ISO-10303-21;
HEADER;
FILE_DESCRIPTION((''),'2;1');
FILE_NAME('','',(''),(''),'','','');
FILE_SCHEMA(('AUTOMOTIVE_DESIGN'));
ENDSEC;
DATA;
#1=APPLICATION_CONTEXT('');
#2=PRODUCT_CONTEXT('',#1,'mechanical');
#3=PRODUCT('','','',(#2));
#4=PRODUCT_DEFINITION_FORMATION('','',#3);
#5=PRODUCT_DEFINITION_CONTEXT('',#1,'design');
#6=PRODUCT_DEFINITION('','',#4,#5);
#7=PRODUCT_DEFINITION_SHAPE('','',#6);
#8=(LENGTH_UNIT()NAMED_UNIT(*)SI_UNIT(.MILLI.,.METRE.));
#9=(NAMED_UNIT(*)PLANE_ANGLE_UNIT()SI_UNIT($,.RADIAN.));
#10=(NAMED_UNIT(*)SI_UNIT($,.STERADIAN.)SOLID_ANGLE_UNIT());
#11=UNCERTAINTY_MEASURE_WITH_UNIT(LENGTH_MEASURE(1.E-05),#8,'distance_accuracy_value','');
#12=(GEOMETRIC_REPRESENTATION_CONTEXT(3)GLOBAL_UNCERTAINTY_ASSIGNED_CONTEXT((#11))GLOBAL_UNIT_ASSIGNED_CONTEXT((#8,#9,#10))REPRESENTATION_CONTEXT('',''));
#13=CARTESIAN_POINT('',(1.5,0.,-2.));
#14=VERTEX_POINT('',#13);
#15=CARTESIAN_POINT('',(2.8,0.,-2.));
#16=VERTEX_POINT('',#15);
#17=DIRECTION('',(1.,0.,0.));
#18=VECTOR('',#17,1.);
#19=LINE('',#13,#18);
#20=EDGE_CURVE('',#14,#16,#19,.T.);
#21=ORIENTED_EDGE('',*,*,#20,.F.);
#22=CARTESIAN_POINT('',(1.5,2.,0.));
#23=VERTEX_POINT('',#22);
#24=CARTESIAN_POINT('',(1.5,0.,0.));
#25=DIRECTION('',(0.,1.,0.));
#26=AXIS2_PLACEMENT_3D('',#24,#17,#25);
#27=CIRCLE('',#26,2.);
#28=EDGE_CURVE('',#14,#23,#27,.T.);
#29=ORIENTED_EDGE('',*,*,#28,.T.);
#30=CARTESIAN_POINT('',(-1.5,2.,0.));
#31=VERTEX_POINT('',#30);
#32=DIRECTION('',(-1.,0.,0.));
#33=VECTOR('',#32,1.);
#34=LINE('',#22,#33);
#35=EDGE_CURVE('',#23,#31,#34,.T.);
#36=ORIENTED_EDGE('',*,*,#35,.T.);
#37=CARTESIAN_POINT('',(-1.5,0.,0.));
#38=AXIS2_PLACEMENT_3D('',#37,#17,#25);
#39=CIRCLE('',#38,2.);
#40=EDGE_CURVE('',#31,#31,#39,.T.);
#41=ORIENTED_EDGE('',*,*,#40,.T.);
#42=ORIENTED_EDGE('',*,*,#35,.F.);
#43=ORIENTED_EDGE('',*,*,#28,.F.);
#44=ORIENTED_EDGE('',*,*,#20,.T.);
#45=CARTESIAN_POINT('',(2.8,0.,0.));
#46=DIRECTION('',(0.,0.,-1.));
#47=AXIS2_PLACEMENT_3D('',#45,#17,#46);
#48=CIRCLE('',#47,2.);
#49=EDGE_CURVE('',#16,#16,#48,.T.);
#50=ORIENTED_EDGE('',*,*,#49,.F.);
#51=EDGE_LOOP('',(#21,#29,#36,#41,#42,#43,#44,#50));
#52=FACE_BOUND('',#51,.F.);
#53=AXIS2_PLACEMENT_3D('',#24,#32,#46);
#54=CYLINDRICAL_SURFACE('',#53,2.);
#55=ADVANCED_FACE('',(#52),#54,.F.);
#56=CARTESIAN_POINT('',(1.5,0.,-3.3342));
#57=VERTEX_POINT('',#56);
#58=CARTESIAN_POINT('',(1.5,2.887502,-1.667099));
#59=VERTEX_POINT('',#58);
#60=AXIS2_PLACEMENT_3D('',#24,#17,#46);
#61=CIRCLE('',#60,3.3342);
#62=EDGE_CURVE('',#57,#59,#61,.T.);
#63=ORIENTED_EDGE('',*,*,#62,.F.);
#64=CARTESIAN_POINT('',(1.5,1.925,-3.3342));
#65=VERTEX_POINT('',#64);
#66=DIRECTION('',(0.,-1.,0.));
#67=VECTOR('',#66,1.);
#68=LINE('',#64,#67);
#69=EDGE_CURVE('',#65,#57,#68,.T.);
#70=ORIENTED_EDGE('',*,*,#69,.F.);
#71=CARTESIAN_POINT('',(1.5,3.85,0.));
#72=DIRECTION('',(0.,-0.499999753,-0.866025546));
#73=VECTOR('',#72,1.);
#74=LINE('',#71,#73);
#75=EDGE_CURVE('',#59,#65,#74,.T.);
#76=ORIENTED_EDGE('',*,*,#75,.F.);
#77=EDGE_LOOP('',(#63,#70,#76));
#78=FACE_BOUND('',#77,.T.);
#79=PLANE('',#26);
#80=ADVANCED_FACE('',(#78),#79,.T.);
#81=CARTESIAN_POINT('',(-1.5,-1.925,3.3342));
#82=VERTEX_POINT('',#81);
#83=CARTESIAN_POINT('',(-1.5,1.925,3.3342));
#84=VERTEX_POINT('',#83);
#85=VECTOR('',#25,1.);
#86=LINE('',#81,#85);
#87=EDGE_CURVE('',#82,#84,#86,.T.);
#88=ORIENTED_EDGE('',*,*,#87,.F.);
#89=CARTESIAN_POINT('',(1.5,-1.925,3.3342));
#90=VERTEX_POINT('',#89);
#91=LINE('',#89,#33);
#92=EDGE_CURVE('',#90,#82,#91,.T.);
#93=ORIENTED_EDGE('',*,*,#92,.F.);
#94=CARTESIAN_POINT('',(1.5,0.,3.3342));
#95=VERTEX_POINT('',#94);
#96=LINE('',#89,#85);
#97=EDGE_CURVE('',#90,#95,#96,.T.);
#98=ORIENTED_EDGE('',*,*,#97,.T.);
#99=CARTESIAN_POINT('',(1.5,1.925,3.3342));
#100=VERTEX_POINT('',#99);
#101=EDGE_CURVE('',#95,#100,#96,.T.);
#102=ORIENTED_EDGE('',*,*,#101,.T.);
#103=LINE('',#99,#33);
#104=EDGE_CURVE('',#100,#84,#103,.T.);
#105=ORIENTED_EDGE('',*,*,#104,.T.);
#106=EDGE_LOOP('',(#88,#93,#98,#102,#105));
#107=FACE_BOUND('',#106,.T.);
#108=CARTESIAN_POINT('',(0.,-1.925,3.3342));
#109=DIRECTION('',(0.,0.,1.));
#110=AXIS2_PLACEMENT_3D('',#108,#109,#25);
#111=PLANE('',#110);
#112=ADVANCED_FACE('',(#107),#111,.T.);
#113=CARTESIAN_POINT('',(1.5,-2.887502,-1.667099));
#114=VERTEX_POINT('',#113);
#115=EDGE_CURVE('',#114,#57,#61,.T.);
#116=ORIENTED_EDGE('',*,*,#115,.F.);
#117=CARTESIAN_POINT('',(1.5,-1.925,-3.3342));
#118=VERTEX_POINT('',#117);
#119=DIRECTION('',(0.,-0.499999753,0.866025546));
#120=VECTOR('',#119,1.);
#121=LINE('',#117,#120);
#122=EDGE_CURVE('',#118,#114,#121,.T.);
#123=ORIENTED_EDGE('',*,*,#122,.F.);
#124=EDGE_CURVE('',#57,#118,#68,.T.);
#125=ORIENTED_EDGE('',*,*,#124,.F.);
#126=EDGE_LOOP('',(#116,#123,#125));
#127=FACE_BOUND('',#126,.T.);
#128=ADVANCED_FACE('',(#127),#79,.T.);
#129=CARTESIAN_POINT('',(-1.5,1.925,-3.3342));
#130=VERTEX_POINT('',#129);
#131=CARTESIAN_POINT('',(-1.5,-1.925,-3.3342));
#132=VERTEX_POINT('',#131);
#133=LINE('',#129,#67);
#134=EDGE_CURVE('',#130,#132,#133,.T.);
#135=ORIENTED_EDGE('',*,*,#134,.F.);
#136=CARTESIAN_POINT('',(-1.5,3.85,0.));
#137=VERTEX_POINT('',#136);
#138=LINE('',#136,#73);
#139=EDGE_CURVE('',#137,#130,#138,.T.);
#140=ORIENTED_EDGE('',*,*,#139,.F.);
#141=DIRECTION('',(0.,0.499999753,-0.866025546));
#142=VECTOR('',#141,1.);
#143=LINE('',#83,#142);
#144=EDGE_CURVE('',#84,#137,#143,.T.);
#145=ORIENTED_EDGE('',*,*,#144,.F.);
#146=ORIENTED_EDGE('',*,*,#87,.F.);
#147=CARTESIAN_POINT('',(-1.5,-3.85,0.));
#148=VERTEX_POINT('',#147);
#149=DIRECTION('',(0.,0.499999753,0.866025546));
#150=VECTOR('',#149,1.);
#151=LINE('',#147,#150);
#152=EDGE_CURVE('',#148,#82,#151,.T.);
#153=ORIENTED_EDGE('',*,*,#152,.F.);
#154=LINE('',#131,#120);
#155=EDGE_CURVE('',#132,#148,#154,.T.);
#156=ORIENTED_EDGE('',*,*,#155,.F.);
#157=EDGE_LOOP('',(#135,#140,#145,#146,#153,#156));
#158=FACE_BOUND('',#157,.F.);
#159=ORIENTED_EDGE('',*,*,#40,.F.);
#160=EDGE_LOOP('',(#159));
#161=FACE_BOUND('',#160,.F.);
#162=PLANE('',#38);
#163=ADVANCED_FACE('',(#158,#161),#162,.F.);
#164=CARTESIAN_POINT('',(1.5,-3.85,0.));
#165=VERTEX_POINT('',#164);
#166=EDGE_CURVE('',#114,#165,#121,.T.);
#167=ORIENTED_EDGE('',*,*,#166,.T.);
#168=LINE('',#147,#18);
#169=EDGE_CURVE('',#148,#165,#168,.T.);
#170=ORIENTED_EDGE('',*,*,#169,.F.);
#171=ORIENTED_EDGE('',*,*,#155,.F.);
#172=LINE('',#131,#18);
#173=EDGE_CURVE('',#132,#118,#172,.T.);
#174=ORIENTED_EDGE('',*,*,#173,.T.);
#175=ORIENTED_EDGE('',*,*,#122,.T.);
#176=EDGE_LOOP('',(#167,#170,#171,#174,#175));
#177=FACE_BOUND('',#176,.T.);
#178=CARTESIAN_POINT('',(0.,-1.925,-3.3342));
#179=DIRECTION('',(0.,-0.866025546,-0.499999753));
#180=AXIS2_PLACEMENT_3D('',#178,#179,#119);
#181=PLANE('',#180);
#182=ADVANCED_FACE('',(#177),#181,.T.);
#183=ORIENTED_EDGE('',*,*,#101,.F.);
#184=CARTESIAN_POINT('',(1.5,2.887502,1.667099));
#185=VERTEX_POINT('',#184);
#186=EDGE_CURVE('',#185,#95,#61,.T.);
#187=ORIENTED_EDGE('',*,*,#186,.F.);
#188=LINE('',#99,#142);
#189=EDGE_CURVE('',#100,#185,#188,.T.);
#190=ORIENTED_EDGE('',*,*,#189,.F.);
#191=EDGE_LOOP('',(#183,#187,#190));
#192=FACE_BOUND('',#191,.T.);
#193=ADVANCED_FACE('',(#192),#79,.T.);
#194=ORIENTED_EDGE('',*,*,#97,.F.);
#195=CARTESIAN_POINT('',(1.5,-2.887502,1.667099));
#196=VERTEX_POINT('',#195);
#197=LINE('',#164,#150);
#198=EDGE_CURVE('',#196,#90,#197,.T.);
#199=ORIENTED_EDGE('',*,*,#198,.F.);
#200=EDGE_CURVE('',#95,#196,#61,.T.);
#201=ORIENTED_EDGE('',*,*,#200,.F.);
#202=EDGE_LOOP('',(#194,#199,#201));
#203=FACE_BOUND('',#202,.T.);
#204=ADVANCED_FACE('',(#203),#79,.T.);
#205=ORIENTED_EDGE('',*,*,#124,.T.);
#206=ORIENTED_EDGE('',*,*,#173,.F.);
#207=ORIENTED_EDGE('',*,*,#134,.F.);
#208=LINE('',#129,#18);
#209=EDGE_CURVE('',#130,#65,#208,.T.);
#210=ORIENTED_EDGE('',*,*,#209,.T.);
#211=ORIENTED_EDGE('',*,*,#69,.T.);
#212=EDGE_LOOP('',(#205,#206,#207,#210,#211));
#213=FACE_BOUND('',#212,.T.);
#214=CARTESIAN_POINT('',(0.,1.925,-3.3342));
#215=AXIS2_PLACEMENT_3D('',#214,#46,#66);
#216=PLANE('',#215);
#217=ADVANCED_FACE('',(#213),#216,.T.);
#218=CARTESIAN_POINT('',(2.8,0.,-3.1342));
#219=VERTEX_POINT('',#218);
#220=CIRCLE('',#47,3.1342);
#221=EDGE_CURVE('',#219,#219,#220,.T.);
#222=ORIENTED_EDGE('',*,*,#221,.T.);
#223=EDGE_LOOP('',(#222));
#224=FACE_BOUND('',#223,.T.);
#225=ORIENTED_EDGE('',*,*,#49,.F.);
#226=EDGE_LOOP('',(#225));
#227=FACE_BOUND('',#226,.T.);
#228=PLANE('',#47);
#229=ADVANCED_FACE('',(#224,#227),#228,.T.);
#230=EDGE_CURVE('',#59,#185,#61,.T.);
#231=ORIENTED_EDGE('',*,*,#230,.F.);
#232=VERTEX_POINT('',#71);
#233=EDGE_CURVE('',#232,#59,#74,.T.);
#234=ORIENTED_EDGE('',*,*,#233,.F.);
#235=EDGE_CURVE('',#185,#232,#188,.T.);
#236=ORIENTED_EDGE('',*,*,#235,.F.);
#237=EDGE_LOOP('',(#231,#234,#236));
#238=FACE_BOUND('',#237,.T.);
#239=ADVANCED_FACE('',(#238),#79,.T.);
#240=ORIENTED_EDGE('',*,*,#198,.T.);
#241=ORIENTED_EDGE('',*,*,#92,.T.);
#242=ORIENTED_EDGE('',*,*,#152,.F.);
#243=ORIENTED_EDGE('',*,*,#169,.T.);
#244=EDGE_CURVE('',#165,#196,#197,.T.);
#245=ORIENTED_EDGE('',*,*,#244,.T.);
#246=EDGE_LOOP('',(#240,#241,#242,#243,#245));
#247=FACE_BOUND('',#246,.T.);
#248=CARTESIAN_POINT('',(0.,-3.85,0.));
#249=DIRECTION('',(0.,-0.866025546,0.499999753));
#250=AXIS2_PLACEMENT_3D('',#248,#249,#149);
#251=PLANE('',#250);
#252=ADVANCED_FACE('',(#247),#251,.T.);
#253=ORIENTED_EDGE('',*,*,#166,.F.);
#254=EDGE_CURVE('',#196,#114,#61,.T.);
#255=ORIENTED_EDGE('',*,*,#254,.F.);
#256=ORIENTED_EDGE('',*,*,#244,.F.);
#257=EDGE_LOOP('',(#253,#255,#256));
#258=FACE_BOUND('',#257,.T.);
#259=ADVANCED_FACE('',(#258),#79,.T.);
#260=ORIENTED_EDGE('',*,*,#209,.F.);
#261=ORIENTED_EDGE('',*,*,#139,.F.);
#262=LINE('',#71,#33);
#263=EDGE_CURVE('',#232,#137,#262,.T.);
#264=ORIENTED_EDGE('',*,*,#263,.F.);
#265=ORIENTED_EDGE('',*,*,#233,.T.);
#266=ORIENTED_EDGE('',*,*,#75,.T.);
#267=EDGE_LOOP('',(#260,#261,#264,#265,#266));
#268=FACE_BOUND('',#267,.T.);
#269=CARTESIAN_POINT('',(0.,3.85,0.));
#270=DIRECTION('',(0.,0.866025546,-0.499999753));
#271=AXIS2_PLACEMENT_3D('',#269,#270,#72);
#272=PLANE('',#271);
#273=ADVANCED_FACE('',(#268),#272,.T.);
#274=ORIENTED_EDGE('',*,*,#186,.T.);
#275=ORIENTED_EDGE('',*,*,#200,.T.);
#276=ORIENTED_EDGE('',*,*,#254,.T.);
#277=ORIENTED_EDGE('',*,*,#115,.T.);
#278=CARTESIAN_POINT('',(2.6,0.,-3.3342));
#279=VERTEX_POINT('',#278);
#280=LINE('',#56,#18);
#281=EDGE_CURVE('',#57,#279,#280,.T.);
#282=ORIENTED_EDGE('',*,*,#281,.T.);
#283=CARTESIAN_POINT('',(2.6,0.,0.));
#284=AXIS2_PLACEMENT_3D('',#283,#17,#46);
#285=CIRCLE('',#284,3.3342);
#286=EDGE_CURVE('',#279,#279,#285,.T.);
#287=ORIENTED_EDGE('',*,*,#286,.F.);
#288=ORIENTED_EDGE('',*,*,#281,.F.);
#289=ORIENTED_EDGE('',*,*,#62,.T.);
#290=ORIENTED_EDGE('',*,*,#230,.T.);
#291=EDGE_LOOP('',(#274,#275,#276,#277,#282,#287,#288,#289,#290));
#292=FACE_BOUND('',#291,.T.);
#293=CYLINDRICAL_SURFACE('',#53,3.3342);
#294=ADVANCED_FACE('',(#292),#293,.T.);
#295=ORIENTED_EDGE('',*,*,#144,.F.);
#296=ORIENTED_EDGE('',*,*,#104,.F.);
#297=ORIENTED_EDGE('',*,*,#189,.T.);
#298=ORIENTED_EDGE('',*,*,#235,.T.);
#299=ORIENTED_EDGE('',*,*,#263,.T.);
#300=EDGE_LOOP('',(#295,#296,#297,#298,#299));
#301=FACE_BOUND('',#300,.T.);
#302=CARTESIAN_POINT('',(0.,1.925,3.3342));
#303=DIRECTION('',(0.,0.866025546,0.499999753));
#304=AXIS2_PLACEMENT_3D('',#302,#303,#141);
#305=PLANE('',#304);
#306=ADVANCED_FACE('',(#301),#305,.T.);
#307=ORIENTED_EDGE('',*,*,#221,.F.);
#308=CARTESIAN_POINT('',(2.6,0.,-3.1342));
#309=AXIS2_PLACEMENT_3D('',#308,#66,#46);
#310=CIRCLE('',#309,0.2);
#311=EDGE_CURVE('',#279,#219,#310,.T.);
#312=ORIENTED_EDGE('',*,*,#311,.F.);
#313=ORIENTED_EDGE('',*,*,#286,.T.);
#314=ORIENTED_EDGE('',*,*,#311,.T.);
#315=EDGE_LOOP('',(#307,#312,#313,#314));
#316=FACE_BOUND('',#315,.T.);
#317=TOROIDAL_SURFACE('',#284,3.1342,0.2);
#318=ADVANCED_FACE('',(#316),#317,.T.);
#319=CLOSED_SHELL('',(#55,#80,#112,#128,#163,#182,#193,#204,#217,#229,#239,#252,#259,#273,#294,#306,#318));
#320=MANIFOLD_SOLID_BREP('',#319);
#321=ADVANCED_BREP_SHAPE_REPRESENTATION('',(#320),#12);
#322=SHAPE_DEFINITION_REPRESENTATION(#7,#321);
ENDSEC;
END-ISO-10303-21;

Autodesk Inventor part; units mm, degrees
ref_plane "YZ Plane" through (0, 0, 0) normal (1, 0, 0) x (0, 1, 0)
ref_plane "XZ Plane" through (0, 0, 0) normal (0, 1, 0) x (-1, 0, 0)
ref_plane "XY Plane" through (0, 0, 0) normal (0, 0, 1) x (1, 0, 0)
sketch "Sketch1" plane through (0, 0, 0) normal (1, 0, 0) x (0, 1, 0)
  circle A0 centre (0, 0) radius 3.85 construction
  line L0 (-3.85, 0) -> (-1.925, 3.3342)
  line L1 (-1.925, 3.3342) -> (1.925, 3.3342)
  line L2 (1.925, 3.3342) -> (3.85, 0)
  line L3 (3.85, 0) -> (1.925, -3.3342)
  line L4 (1.925, -3.3342) -> (-1.925, -3.3342)
  line L5 (-1.925, -3.3342) -> (-3.85, 0)
  circle A1 centre (0, 0) radius 2
  dimension "d0" = 7.7
  dimension "d1" = 4
extrude "Extrusion1" add sketch "Sketch1" along normal mid plane 3
sketch "Sketch2" plane through (1.5, 0, 0) normal (1, 0, 0) x (0, 0, -1)
  circle A0 centre (0, 0) radius 3.3342
  circle A1 centre (0, 0) radius 2
extrude "Extrusion2" add sketch "Sketch2" along normal blind 1.3
fillet "Fillet1" radius 0.2 1 edges at (2.8, 0, 3.3342)
thread "Thread1" size "M4x0.7" class "6H" standard "ANSI Metric M Profile" full length
properties part number "Nut 4mm self locking"
